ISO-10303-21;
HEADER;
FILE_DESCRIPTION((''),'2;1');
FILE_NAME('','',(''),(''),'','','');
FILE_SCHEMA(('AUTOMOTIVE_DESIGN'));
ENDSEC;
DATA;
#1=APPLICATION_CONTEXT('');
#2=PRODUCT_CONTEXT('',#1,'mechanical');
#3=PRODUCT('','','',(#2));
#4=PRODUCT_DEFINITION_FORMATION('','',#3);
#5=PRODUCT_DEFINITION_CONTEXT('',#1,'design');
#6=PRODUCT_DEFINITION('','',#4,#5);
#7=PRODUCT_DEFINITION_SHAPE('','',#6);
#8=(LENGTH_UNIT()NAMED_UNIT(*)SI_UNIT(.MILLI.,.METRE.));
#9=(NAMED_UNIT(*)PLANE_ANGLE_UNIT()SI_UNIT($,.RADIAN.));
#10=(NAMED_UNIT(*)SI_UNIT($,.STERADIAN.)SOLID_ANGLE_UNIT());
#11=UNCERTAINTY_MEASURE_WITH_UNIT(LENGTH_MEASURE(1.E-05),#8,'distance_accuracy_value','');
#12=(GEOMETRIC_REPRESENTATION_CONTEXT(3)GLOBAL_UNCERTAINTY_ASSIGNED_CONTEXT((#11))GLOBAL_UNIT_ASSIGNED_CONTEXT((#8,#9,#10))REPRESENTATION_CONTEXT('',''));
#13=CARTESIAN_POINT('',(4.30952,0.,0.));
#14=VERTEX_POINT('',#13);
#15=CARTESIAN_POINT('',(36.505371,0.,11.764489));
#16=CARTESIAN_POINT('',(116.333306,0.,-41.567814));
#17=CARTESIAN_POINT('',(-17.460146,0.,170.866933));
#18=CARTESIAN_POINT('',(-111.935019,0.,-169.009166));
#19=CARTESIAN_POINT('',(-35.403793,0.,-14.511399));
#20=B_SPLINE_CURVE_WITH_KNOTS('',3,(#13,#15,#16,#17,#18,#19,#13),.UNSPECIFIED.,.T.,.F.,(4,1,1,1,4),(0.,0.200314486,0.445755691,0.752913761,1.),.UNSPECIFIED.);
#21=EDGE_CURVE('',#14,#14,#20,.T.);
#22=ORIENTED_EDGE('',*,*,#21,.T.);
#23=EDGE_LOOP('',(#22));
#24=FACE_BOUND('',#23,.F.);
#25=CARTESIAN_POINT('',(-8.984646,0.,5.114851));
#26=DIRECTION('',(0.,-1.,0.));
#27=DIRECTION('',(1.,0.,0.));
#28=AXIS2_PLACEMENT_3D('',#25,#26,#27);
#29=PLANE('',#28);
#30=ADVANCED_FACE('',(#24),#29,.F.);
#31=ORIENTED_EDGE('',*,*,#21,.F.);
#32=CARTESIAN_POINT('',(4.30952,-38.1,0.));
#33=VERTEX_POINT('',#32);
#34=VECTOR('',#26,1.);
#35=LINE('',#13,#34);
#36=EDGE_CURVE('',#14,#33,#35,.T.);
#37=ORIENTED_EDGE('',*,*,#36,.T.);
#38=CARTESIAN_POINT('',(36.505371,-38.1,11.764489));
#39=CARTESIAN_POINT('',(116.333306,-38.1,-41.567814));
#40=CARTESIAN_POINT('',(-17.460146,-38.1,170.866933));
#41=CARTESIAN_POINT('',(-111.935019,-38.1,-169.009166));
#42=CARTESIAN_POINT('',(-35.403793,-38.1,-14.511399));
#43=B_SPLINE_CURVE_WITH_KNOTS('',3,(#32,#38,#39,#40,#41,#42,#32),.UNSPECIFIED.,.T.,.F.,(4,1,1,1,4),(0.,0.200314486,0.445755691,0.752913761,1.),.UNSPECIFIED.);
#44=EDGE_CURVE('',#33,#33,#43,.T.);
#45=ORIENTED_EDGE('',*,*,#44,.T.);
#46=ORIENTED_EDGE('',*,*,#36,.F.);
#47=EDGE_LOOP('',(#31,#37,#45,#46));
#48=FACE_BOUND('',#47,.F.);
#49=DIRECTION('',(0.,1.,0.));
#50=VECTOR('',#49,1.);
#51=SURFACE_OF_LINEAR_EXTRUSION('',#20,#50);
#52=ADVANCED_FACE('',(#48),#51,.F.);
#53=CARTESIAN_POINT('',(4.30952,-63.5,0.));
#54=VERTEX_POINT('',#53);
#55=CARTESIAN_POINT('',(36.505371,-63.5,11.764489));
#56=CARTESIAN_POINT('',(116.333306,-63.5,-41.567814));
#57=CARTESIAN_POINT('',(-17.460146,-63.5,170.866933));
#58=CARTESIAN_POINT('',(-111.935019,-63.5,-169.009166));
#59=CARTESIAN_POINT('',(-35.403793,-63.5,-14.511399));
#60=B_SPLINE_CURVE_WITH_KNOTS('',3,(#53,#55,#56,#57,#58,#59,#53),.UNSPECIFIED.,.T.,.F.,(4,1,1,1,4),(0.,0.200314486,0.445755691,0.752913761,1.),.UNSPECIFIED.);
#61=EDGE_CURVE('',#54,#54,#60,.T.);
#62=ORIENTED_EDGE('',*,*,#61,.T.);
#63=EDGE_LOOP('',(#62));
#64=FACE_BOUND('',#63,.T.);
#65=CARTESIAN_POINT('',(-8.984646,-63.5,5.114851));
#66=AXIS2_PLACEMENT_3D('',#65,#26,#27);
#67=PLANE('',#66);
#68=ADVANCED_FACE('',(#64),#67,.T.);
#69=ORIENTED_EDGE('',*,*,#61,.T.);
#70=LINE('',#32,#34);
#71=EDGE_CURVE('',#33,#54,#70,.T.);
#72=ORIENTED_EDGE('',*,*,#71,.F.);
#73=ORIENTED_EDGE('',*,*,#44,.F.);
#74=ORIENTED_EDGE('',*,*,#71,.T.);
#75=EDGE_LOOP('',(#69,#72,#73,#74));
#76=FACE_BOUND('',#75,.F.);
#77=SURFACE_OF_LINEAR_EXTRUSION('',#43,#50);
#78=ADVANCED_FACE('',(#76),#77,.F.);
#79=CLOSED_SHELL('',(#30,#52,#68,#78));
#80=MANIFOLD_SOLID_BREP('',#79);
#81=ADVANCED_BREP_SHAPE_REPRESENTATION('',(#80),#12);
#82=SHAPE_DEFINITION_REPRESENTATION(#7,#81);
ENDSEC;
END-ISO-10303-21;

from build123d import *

# Parameters (mm, degrees)
F1_DEPTH = 38.1
F4_W     = 6.5451301634
F4_H     = 14.025259763
F5_DEPTH = 25.4


# Not quite as in the source:
# - the program builds the solid bodies; features that only make, move or delete a surface that nothing else refers to are left out


with BuildPart() as f1:
    # F0 (on Front) → F1 (new body)
    with BuildSketch(Plane.XZ):
        with BuildLine():
            add(Edge.make_bspline(
                [(4.3095196597, 0), (36.5053707041, 11.7644892129), (116.333305535, -41.5678144416), (-17.4601458028, 170.8669328795), (-111.9350192378, -169.009166265), (-35.4037927626, -14.5113988432), (4.3095196597, 0)],
                knots=[0, 0, 0, 0, 0.2003144859, 0.4457556905, 0.7529137605, 1, 1, 1, 1], degree=3))
        make_face()
    extrude(amount=F1_DEPTH)

    # F4 (on face) → F5 (join)
    with BuildSketch(Plane.XZ.offset(38.1)):
        with BuildLine():
            add(Edge.make_bspline(
                [(4.3095196597, 0), (36.5053707041, 11.7644892129), (116.333305535, -41.5678144416), (-17.4601458028, 170.8669328795), (-111.9350192378, -169.009166265), (-35.4037927626, -14.5113988432), (4.3095196597, 0)],
                knots=[0, 0, 0, 0, 0.2003144859, 0.4457556905, 0.7529137605, 1, 1, 1, 1], degree=3))
        make_face()
        Polygon((9.0551180765, 48.0109006166), (9.0551180765, 62.3478330672), (14.6652227268, 62.0361603796), (14.6652227268, 48.0109006166), align=None, mode=Mode.SUBTRACT)
        with Locations((28.2229799777, 55.0235304981)):
            Rectangle(F4_W, F4_H, mode=Mode.SUBTRACT)
        with Locations((28.2229799777, 55.0235304981)):
            Rectangle(F4_W, F4_H)
        Polygon((14.6652227268, 62.0361603796), (9.0551180765, 62.3478330672), (9.0551180765, 48.0109006166), (14.6652227268, 48.0109006166), align=None)
    extrude(amount=F5_DEPTH)


solid = f1.part
